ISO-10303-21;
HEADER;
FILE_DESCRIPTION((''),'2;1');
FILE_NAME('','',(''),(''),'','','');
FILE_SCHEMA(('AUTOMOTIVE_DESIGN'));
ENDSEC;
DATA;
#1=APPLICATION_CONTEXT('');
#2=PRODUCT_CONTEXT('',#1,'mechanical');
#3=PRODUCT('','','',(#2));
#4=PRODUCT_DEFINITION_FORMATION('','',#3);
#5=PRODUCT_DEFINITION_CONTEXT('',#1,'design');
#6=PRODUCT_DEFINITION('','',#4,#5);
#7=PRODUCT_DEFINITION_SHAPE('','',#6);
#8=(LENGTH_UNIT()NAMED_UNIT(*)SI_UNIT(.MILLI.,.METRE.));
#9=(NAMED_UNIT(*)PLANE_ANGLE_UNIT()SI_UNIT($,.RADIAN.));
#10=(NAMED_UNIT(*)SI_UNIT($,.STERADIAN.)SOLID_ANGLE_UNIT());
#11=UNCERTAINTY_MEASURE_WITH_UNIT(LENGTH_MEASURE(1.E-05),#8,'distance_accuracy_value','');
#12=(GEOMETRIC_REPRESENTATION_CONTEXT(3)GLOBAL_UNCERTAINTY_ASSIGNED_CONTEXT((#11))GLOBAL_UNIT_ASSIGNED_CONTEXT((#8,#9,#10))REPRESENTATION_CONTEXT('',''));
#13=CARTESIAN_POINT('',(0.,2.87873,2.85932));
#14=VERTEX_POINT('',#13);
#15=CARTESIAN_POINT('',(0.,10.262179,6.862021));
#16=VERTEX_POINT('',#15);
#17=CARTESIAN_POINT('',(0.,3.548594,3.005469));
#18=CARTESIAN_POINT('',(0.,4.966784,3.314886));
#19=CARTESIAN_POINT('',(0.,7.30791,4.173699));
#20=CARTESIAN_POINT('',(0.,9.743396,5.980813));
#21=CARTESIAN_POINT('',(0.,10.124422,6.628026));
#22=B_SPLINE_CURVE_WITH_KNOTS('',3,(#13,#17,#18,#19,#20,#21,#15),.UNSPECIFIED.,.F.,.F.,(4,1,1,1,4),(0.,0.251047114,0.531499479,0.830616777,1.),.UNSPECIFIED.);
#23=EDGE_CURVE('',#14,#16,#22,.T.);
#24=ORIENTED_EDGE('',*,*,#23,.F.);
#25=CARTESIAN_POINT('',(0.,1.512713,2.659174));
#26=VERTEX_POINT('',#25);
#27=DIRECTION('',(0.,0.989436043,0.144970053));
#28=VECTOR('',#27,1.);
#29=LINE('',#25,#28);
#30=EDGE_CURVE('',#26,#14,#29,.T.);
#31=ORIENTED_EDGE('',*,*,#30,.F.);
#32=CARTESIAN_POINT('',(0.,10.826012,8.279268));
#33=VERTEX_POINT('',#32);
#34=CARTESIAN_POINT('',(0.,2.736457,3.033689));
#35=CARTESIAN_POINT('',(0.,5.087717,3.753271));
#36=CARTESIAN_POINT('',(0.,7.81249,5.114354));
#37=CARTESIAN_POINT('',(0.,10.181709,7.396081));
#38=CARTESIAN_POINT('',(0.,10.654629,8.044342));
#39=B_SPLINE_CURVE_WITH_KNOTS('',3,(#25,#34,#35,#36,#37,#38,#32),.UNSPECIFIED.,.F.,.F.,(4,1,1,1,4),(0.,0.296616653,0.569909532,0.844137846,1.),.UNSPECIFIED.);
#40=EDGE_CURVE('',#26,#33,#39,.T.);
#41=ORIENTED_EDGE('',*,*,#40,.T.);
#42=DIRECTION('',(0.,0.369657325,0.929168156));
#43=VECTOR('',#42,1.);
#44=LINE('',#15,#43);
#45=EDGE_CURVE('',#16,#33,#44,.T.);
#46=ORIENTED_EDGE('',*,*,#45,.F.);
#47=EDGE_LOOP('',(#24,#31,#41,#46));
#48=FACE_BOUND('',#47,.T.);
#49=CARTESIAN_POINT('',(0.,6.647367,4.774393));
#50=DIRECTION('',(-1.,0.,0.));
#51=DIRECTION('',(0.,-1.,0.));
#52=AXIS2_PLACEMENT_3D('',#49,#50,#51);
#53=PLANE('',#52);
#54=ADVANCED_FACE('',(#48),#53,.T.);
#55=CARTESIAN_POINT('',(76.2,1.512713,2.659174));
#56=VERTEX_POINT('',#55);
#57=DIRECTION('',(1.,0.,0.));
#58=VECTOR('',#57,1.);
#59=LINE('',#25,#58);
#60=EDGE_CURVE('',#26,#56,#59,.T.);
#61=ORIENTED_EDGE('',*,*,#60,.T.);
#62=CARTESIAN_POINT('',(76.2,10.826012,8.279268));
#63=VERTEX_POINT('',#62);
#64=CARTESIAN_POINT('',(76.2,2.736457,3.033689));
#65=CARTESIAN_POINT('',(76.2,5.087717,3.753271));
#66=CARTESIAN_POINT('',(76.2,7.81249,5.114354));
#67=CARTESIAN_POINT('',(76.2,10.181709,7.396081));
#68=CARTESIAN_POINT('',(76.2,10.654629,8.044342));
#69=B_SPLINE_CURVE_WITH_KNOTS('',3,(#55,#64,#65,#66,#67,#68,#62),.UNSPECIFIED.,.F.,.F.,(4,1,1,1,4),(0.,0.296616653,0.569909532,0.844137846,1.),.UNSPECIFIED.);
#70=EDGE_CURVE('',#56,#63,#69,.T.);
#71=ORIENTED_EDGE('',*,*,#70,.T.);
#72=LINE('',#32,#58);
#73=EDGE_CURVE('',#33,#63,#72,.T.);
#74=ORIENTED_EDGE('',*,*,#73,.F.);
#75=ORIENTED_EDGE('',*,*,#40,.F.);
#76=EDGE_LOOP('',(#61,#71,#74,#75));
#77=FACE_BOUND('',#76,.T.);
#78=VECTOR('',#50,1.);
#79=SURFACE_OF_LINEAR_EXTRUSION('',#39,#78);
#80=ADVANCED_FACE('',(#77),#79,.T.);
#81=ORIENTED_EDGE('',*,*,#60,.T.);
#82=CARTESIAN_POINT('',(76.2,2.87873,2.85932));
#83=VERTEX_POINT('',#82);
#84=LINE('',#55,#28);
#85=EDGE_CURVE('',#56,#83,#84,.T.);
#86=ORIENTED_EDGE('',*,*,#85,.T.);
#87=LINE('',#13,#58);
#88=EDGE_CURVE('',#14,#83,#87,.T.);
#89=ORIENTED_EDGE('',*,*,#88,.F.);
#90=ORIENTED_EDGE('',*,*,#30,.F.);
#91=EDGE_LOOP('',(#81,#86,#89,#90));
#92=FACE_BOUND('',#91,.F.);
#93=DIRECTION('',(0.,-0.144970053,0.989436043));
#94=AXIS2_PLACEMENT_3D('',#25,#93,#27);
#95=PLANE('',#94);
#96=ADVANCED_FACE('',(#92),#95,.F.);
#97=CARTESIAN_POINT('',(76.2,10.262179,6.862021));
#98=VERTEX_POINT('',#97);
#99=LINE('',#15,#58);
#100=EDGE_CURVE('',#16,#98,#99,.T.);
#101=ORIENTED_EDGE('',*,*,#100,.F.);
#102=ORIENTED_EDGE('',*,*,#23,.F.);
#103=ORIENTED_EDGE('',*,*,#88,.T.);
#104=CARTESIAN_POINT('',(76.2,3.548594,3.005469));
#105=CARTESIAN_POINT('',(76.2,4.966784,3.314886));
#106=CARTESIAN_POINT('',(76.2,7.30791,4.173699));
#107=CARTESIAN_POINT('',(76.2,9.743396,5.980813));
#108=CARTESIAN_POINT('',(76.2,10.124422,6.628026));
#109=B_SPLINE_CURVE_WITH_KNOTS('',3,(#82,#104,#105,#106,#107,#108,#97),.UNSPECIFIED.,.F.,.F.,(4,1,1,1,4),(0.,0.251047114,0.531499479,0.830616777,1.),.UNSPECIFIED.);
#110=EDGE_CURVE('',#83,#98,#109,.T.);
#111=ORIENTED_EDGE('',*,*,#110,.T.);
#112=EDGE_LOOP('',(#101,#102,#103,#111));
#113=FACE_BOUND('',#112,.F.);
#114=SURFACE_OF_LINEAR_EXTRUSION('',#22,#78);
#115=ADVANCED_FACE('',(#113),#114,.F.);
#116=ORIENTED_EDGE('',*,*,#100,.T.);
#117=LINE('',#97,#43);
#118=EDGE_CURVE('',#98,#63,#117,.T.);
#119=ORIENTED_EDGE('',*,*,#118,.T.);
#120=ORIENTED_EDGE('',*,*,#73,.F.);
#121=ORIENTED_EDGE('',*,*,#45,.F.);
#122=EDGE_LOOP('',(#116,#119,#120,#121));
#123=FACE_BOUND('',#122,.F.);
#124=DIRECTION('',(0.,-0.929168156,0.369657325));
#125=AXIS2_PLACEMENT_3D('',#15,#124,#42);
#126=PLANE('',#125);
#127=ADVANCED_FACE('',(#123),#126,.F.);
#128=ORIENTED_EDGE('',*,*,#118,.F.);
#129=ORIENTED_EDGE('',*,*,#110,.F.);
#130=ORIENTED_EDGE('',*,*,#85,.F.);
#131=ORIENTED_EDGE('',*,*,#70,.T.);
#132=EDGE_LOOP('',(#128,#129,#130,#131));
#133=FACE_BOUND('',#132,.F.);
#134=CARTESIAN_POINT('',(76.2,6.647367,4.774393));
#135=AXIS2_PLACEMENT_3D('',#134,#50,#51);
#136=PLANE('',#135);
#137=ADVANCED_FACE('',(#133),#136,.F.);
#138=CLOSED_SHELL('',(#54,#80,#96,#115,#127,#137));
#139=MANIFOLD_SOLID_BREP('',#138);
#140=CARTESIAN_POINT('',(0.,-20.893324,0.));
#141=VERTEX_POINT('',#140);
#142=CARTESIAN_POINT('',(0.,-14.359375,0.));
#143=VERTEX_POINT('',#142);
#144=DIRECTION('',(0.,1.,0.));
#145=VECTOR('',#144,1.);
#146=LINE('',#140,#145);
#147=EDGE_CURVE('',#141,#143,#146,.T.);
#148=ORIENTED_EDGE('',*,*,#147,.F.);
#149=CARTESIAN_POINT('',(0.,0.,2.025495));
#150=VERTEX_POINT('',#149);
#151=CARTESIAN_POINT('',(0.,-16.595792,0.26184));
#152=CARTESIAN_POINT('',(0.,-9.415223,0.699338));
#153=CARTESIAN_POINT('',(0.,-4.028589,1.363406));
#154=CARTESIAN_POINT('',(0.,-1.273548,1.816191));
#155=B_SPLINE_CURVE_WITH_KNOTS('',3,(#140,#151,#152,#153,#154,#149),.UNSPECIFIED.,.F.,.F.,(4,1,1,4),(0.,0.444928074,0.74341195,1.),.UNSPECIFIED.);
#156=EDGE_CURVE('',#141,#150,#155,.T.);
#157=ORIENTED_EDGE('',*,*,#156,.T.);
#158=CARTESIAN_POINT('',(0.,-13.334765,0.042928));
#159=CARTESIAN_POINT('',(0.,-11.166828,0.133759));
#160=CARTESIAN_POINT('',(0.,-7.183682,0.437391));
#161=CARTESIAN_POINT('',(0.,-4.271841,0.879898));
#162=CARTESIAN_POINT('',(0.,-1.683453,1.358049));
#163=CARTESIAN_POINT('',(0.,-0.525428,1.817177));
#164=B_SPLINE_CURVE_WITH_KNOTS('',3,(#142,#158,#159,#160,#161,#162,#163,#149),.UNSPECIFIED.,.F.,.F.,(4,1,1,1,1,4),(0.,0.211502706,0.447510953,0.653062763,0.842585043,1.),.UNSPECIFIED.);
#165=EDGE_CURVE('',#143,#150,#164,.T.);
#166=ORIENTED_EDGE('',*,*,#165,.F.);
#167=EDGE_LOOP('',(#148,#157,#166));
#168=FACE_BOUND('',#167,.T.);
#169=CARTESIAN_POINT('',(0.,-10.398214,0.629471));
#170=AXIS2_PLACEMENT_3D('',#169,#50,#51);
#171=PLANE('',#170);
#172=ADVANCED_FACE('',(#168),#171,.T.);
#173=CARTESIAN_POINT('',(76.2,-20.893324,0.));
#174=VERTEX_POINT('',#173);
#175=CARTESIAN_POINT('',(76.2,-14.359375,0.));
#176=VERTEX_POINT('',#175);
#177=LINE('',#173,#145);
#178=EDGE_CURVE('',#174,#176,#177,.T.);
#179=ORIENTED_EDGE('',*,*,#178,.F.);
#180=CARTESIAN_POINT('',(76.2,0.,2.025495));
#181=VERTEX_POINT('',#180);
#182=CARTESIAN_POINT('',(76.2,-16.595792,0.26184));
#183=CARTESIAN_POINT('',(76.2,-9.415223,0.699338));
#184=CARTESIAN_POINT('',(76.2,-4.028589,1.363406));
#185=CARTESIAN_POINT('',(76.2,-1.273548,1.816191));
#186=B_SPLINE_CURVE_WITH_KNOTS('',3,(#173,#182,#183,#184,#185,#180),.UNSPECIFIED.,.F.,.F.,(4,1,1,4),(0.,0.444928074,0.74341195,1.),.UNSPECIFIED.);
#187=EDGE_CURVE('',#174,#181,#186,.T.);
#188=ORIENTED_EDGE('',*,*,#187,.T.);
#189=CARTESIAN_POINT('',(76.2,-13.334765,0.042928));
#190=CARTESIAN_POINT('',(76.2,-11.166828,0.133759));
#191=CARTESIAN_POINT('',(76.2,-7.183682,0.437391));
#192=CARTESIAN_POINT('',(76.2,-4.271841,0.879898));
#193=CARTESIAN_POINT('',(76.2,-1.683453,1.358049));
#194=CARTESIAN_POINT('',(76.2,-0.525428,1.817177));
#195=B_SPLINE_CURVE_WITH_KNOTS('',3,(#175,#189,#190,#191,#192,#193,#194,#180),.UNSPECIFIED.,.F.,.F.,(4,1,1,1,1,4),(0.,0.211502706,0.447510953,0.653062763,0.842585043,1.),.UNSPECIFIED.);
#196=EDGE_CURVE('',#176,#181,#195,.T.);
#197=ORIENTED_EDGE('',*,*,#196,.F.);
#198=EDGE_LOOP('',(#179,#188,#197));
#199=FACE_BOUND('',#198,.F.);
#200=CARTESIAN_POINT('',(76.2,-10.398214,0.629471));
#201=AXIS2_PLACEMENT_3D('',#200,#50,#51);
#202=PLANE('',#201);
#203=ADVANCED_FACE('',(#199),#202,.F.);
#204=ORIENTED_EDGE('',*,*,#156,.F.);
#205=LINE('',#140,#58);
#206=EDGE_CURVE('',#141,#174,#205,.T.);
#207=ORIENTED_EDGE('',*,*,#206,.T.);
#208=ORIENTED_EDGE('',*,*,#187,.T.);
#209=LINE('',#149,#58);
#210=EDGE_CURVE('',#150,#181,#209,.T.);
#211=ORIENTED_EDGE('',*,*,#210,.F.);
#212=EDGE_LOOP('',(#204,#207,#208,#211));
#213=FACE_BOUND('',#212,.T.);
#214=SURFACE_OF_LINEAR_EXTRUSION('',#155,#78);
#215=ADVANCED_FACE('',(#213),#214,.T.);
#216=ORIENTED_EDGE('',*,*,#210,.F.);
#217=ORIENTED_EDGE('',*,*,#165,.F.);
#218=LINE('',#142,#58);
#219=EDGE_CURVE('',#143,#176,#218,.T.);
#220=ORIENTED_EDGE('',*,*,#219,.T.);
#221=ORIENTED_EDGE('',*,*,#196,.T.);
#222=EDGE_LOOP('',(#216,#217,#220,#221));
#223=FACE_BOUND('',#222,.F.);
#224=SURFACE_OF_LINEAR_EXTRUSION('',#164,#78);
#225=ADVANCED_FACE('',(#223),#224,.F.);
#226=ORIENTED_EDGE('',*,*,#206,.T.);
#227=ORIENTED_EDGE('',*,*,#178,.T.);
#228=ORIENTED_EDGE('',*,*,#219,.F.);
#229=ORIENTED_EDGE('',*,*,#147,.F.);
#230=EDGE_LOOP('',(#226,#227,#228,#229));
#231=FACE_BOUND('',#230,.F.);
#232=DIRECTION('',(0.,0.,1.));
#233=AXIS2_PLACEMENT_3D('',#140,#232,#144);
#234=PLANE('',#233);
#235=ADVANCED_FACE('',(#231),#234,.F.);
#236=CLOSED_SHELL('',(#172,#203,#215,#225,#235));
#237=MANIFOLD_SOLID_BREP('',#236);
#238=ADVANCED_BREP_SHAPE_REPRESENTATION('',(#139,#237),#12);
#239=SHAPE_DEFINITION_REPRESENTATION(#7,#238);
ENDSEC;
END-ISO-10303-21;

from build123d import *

# Parameters (mm, degrees)
F2_DEPTH = 76.2
F3_DEPTH = 76.2


with BuildPart() as f2:
    # F0 (on Right) → F2 (new body)
    with BuildSketch(Plane.YZ):
        with BuildLine():
            add(Edge.make_bspline(
                [(-20.8933241665, 0), (-16.5957920473, 0.2618400599), (-9.4152230469, 0.6993378063), (-4.0285886841, 1.3634060629), (-1.2735477229, 1.8161906645), (0, 2.0254952833)],
                knots=[0, 0, 0, 0, 0.4449280736, 0.74341195, 1, 1, 1, 1], degree=3))
            Line((-20.8933241665, 0), (-14.3593754619, 0))
            add(Edge.make_bspline(
                [(-14.3593754619, 0), (-13.3347647697, 0.0429284476), (-11.1668279383, 0.1337592025), (-7.1836818354, 0.4373909917), (-4.2718408429, 0.8798975725), (-1.683453406, 1.3580491642), (-0.5254279612, 1.8171765664), (0, 2.0254952833)],
                knots=[0, 0, 0, 0, 0.2115027062, 0.4475109525, 0.6530627628, 0.8425850434, 1, 1, 1, 1], degree=3))
        make_face()
    extrude(amount=F2_DEPTH)


with BuildPart() as f3:
    # F1 (on Right) → F3 (new body)
    with BuildSketch(Plane.YZ):
        with BuildLine():
            add(Edge.make_bspline(
                [(1.5127130318, 2.6591736823), (2.7364566117, 3.03368933), (5.0877174845, 3.7532714412), (7.8124899968, 5.1143543324), (10.1817089845, 7.3960807365), (10.6546288532, 8.0443418411), (10.8260121197, 8.2792676985)],
                knots=[0, 0, 0, 0, 0.2966166535, 0.5699095325, 0.8441378464, 1, 1, 1, 1], degree=3))
            Line((1.5127130318, 2.6591736823), (2.8787299525, 2.8593195602))
            add(Edge.make_bspline(
                [(2.8787299525, 2.8593195602), (3.5485942869, 3.0054688519), (4.9667844391, 3.3148859614), (7.3079096451, 4.1736985069), (9.7433961584, 5.9808127912), (10.1244218897, 6.6280255994), (10.2621791884, 6.8620210513)],
                knots=[0, 0, 0, 0, 0.251047114, 0.5314994792, 0.8306167775, 1, 1, 1, 1], degree=3))
            Line((10.2621791884, 6.8620210513), (10.8260121197, 8.2792676985))
        make_face()
    extrude(amount=F3_DEPTH)


solid = Compound([f2.part, f3.part])
